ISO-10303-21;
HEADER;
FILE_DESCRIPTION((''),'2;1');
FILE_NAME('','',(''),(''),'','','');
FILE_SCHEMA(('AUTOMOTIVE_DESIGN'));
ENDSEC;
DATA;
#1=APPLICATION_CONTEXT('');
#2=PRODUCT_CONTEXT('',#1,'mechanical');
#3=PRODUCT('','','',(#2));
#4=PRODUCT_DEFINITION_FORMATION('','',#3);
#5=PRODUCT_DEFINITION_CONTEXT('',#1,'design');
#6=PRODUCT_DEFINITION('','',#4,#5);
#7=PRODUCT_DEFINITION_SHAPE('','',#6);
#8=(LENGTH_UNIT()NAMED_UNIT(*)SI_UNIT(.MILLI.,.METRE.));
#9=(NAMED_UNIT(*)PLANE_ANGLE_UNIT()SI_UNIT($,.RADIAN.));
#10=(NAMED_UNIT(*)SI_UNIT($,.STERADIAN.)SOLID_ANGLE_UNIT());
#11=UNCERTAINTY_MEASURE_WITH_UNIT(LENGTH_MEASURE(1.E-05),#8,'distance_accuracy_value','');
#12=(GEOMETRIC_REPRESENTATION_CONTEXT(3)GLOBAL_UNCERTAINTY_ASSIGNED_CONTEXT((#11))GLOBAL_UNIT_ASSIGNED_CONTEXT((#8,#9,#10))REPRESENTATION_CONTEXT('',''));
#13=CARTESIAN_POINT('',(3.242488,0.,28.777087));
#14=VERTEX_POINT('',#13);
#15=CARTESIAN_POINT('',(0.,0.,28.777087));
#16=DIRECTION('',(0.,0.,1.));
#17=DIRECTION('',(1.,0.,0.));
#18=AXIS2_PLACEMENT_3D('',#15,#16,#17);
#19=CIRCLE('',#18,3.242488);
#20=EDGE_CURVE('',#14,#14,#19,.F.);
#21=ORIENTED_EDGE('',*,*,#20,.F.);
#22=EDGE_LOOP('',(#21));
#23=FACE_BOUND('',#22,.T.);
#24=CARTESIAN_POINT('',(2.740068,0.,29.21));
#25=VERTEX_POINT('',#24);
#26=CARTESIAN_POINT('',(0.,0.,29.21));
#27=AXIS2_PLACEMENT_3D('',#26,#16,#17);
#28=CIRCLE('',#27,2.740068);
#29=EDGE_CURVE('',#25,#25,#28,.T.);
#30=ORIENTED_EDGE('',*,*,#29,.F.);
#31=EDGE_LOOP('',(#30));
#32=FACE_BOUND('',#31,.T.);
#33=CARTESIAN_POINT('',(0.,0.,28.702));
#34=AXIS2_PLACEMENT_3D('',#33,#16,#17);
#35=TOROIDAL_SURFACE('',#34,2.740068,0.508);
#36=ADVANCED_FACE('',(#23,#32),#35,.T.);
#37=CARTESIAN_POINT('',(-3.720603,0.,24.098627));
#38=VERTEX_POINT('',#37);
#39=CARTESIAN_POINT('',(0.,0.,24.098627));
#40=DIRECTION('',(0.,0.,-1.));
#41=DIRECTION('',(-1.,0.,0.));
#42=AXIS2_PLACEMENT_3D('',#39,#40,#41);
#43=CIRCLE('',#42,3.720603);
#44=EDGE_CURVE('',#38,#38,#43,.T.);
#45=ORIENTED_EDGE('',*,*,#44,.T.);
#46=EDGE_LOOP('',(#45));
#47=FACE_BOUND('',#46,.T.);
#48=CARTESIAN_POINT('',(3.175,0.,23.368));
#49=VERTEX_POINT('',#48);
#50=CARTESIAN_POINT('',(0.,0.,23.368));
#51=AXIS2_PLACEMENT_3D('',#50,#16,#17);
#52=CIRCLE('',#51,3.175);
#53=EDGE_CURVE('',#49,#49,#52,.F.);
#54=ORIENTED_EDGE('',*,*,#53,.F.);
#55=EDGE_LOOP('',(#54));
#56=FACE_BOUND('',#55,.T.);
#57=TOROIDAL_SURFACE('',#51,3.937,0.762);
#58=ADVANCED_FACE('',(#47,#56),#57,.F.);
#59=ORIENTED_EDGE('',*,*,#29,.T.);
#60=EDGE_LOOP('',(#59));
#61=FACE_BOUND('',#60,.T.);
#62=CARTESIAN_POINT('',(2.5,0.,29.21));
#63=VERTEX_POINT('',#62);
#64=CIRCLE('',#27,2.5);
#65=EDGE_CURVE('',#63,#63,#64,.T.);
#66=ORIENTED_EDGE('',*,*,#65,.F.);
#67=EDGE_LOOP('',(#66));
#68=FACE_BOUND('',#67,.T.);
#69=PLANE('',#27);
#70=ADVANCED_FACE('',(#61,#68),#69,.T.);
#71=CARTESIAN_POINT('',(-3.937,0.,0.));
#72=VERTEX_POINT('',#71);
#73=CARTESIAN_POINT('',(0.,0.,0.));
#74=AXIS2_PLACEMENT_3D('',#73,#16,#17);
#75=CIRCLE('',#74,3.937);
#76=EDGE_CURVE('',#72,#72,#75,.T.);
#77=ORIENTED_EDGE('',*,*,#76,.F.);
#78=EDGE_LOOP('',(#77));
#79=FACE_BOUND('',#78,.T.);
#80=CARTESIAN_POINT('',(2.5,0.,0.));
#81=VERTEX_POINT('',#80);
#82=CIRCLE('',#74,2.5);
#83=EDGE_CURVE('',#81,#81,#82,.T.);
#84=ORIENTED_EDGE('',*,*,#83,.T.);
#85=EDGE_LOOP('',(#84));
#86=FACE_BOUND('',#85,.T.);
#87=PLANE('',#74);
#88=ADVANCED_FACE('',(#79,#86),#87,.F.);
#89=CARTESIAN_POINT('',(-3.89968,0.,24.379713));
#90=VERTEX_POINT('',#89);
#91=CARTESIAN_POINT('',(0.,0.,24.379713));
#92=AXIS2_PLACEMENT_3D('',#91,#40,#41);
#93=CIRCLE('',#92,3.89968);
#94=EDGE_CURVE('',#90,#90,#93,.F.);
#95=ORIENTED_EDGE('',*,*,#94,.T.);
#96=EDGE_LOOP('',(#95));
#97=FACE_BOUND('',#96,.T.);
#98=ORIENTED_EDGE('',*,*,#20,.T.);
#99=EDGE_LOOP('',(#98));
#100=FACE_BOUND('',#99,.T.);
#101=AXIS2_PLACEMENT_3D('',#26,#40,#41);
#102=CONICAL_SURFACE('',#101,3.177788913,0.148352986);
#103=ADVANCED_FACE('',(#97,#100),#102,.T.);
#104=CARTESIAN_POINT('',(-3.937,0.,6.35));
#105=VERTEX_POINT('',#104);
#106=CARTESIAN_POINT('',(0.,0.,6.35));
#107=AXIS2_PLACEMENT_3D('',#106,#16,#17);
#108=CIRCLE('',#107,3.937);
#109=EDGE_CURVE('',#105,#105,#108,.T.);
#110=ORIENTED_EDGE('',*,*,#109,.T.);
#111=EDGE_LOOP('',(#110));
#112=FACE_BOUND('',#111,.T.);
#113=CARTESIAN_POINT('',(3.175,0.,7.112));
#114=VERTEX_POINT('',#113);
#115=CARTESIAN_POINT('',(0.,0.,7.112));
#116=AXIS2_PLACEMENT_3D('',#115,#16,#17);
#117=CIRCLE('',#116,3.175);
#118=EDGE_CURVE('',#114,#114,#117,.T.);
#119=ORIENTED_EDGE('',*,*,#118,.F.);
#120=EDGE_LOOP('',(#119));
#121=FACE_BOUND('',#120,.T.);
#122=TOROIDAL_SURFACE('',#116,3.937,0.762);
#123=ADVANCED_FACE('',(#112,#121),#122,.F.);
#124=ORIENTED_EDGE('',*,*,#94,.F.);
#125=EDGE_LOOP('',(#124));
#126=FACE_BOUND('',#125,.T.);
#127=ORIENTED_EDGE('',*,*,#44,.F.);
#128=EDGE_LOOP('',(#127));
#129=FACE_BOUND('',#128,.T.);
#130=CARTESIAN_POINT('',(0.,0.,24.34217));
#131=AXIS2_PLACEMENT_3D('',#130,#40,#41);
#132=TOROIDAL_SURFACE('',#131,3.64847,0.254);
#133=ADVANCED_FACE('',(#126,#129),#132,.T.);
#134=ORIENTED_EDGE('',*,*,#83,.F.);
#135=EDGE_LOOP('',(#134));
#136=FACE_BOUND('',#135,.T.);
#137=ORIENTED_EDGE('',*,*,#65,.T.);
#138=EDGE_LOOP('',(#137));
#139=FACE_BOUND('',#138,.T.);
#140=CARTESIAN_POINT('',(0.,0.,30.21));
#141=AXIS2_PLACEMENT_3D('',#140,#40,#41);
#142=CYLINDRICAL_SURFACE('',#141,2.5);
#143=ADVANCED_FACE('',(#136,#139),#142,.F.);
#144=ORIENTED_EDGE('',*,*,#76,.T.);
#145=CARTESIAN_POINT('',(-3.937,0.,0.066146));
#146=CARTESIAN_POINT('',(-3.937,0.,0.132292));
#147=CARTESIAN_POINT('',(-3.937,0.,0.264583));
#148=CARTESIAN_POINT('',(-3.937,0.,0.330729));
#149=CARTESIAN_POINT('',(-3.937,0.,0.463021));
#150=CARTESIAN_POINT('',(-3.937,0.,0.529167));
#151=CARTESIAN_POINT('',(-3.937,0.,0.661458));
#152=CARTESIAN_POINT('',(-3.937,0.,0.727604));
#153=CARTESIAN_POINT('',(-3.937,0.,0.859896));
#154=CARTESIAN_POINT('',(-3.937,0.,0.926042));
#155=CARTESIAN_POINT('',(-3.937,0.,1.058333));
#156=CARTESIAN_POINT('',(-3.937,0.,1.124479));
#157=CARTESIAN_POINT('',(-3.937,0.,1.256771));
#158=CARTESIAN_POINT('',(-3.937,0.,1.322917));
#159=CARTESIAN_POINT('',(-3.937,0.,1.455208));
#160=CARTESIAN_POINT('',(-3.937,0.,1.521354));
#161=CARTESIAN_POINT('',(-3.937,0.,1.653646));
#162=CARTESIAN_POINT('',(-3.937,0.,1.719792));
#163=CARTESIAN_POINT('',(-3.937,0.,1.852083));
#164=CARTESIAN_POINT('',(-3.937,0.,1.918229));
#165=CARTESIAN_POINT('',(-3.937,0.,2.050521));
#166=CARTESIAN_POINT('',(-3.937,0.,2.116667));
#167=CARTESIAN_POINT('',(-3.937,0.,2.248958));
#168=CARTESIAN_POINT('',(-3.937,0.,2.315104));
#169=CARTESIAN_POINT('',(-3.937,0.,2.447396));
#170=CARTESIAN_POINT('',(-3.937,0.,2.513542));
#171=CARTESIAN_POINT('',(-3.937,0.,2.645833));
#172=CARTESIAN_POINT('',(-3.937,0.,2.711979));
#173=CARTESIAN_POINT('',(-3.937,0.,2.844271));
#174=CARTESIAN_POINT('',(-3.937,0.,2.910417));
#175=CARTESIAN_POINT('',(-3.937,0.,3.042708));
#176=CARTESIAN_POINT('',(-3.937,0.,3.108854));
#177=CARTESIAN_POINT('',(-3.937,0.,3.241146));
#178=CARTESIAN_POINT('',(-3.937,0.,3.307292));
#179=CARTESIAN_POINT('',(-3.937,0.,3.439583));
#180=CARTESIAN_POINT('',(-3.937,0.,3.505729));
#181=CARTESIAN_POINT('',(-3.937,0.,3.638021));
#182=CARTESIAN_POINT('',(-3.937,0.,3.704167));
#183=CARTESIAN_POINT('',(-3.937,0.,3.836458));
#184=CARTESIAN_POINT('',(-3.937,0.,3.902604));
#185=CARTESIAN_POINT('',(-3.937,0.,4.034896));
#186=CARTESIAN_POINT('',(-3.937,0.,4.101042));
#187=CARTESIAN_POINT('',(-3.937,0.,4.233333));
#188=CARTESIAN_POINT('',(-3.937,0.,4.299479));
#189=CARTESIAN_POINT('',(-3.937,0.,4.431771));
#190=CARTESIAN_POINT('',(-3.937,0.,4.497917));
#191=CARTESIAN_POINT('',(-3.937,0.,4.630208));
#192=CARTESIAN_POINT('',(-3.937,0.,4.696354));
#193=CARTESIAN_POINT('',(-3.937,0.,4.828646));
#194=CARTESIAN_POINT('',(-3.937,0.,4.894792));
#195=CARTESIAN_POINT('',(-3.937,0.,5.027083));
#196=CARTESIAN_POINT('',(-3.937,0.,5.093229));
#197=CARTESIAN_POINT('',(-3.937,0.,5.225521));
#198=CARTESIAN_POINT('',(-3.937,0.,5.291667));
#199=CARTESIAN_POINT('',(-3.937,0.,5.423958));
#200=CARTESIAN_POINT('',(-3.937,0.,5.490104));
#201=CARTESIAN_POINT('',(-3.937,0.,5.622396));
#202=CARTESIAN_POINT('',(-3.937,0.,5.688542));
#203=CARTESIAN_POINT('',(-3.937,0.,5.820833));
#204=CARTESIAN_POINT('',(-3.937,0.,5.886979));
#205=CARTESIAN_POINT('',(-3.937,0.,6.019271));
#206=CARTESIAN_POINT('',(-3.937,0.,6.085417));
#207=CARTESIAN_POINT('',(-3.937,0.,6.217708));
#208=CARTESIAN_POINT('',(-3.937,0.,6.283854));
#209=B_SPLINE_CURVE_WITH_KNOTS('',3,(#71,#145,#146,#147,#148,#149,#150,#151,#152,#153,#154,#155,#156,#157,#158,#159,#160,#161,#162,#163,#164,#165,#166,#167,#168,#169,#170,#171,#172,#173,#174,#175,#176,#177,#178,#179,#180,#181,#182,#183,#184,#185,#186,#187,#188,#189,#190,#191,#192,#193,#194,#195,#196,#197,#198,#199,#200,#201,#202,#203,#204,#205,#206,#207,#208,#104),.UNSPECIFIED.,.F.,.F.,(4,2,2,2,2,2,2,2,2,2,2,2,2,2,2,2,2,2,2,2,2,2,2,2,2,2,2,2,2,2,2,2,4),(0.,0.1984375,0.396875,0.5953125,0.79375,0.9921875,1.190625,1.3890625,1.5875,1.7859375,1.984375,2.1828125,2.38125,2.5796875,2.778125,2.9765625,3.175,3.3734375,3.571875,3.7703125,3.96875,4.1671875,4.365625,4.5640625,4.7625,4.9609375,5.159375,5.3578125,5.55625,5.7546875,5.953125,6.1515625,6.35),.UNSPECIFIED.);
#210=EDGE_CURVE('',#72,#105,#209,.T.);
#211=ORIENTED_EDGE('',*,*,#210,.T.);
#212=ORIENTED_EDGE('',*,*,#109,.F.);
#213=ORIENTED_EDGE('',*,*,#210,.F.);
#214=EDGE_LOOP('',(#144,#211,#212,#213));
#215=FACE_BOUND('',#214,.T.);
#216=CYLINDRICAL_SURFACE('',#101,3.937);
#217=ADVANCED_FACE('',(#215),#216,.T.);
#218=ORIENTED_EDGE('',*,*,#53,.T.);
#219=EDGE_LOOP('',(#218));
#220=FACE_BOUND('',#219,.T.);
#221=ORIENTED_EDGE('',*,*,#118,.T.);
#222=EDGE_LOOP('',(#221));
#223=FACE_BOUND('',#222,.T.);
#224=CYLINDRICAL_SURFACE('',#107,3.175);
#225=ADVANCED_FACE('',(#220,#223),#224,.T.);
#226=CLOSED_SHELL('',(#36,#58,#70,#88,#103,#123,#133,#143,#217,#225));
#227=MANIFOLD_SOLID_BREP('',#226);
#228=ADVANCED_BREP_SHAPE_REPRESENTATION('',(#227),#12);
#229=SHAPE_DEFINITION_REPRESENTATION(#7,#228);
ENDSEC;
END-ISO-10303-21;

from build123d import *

# Parameters (mm, degrees)
SKETCH1_R           = 3.937
BOSS_EXTRUDE1_DEPTH = 29.21
SKETCH2_R           = 2.5
CUT_EXTRUDE1_START  = -5.08
SKETCH3_R           = 5.08
SKETCH3_R_2         = 3.175
CUT_EXTRUDE1_DEPTH  = 17.78
FILLET1_R           = 0.762
FILLET2_R           = 0.762
CHAMFER1_SIZE       = 5.08
CHAMFER1_SIZE_2     = 0.759211087
FILLET3_R           = 0.254
FILLET4_R           = 0.508


# Some blends are built 0.0001 mm under size
with BuildPart() as part:
    # Sketch1 → Boss-Extrude1 (new body)
    with BuildSketch(Plane.XY):
        with Locations(Location((0, 0, 0), (0, 0, 180))):
            Circle(SKETCH1_R)
    extrude(amount=BOSS_EXTRUDE1_DEPTH)

    # Cut-Sweep1: sweep along a curve in space
    with BuildLine() as cut_sweep1_path:
        Line((0, 0, 29.21), (0, 0, 0))
    # Sketch2 → Cut-Sweep1 (sweep, cut)
    with BuildSketch(Plane.XY.offset(29.21)):
        Circle(SKETCH2_R)
    sweep(path=cut_sweep1_path.line, mode=Mode.SUBTRACT)

    # Sketch3 → Cut-Extrude1 (cut)
    with BuildSketch(Plane.XY.offset(29.21).offset(CUT_EXTRUDE1_START)):
        Circle(SKETCH3_R)
        Circle(SKETCH3_R_2, mode=Mode.SUBTRACT)
    extrude(amount=-CUT_EXTRUDE1_DEPTH, mode=Mode.SUBTRACT)

    # Fillet1
    fillet1_edges = [part.edges().sort_by_distance(p)[0] for p in [
        (-3.175, 0, 6.35),
    ]]
    fillet(fillet1_edges, radius=FILLET1_R - 0.0001)  # a hair under: the kernel refuses the full size

    # Fillet2
    fillet2_edges = [part.edges().sort_by_distance(p)[0] for p in [
        (-3.175, 0, 24.13),
    ]]
    fillet(fillet2_edges, radius=FILLET2_R - 0.0001)  # a hair under: the kernel refuses the full size

    # Chamfer1
    # the kernel refuses this chamfer: 5.08, 0.759211087 mm, written as the material it takes off along each edge
    with BuildSketch(Plane(origin=(0, 0, 29.21), x_dir=(-1, 0, 0), z_dir=(0, 1, 0))) as chamfer1_piece_1:
        Polygon((3.937, -CHAMFER1_SIZE), (3.937 - CHAMFER1_SIZE_2, 0), (3.937, 0), align=None)
    revolve(axis=Axis((0, 0, 29.21), (0, 0, 1)), mode=Mode.SUBTRACT)

    # Fillet3
    fillet3_edges = [part.edges().sort_by_distance(p)[0] for p in [
        (3.937, 0, 24.13),
    ]]
    fillet(fillet3_edges, radius=FILLET3_R)

    # Fillet4
    fillet4_edges = [part.edges().sort_by_distance(p)[0] for p in [
        (3.177788913, 0, 29.21),
    ]]
    fillet(fillet4_edges, radius=FILLET4_R)


solid = part.part
